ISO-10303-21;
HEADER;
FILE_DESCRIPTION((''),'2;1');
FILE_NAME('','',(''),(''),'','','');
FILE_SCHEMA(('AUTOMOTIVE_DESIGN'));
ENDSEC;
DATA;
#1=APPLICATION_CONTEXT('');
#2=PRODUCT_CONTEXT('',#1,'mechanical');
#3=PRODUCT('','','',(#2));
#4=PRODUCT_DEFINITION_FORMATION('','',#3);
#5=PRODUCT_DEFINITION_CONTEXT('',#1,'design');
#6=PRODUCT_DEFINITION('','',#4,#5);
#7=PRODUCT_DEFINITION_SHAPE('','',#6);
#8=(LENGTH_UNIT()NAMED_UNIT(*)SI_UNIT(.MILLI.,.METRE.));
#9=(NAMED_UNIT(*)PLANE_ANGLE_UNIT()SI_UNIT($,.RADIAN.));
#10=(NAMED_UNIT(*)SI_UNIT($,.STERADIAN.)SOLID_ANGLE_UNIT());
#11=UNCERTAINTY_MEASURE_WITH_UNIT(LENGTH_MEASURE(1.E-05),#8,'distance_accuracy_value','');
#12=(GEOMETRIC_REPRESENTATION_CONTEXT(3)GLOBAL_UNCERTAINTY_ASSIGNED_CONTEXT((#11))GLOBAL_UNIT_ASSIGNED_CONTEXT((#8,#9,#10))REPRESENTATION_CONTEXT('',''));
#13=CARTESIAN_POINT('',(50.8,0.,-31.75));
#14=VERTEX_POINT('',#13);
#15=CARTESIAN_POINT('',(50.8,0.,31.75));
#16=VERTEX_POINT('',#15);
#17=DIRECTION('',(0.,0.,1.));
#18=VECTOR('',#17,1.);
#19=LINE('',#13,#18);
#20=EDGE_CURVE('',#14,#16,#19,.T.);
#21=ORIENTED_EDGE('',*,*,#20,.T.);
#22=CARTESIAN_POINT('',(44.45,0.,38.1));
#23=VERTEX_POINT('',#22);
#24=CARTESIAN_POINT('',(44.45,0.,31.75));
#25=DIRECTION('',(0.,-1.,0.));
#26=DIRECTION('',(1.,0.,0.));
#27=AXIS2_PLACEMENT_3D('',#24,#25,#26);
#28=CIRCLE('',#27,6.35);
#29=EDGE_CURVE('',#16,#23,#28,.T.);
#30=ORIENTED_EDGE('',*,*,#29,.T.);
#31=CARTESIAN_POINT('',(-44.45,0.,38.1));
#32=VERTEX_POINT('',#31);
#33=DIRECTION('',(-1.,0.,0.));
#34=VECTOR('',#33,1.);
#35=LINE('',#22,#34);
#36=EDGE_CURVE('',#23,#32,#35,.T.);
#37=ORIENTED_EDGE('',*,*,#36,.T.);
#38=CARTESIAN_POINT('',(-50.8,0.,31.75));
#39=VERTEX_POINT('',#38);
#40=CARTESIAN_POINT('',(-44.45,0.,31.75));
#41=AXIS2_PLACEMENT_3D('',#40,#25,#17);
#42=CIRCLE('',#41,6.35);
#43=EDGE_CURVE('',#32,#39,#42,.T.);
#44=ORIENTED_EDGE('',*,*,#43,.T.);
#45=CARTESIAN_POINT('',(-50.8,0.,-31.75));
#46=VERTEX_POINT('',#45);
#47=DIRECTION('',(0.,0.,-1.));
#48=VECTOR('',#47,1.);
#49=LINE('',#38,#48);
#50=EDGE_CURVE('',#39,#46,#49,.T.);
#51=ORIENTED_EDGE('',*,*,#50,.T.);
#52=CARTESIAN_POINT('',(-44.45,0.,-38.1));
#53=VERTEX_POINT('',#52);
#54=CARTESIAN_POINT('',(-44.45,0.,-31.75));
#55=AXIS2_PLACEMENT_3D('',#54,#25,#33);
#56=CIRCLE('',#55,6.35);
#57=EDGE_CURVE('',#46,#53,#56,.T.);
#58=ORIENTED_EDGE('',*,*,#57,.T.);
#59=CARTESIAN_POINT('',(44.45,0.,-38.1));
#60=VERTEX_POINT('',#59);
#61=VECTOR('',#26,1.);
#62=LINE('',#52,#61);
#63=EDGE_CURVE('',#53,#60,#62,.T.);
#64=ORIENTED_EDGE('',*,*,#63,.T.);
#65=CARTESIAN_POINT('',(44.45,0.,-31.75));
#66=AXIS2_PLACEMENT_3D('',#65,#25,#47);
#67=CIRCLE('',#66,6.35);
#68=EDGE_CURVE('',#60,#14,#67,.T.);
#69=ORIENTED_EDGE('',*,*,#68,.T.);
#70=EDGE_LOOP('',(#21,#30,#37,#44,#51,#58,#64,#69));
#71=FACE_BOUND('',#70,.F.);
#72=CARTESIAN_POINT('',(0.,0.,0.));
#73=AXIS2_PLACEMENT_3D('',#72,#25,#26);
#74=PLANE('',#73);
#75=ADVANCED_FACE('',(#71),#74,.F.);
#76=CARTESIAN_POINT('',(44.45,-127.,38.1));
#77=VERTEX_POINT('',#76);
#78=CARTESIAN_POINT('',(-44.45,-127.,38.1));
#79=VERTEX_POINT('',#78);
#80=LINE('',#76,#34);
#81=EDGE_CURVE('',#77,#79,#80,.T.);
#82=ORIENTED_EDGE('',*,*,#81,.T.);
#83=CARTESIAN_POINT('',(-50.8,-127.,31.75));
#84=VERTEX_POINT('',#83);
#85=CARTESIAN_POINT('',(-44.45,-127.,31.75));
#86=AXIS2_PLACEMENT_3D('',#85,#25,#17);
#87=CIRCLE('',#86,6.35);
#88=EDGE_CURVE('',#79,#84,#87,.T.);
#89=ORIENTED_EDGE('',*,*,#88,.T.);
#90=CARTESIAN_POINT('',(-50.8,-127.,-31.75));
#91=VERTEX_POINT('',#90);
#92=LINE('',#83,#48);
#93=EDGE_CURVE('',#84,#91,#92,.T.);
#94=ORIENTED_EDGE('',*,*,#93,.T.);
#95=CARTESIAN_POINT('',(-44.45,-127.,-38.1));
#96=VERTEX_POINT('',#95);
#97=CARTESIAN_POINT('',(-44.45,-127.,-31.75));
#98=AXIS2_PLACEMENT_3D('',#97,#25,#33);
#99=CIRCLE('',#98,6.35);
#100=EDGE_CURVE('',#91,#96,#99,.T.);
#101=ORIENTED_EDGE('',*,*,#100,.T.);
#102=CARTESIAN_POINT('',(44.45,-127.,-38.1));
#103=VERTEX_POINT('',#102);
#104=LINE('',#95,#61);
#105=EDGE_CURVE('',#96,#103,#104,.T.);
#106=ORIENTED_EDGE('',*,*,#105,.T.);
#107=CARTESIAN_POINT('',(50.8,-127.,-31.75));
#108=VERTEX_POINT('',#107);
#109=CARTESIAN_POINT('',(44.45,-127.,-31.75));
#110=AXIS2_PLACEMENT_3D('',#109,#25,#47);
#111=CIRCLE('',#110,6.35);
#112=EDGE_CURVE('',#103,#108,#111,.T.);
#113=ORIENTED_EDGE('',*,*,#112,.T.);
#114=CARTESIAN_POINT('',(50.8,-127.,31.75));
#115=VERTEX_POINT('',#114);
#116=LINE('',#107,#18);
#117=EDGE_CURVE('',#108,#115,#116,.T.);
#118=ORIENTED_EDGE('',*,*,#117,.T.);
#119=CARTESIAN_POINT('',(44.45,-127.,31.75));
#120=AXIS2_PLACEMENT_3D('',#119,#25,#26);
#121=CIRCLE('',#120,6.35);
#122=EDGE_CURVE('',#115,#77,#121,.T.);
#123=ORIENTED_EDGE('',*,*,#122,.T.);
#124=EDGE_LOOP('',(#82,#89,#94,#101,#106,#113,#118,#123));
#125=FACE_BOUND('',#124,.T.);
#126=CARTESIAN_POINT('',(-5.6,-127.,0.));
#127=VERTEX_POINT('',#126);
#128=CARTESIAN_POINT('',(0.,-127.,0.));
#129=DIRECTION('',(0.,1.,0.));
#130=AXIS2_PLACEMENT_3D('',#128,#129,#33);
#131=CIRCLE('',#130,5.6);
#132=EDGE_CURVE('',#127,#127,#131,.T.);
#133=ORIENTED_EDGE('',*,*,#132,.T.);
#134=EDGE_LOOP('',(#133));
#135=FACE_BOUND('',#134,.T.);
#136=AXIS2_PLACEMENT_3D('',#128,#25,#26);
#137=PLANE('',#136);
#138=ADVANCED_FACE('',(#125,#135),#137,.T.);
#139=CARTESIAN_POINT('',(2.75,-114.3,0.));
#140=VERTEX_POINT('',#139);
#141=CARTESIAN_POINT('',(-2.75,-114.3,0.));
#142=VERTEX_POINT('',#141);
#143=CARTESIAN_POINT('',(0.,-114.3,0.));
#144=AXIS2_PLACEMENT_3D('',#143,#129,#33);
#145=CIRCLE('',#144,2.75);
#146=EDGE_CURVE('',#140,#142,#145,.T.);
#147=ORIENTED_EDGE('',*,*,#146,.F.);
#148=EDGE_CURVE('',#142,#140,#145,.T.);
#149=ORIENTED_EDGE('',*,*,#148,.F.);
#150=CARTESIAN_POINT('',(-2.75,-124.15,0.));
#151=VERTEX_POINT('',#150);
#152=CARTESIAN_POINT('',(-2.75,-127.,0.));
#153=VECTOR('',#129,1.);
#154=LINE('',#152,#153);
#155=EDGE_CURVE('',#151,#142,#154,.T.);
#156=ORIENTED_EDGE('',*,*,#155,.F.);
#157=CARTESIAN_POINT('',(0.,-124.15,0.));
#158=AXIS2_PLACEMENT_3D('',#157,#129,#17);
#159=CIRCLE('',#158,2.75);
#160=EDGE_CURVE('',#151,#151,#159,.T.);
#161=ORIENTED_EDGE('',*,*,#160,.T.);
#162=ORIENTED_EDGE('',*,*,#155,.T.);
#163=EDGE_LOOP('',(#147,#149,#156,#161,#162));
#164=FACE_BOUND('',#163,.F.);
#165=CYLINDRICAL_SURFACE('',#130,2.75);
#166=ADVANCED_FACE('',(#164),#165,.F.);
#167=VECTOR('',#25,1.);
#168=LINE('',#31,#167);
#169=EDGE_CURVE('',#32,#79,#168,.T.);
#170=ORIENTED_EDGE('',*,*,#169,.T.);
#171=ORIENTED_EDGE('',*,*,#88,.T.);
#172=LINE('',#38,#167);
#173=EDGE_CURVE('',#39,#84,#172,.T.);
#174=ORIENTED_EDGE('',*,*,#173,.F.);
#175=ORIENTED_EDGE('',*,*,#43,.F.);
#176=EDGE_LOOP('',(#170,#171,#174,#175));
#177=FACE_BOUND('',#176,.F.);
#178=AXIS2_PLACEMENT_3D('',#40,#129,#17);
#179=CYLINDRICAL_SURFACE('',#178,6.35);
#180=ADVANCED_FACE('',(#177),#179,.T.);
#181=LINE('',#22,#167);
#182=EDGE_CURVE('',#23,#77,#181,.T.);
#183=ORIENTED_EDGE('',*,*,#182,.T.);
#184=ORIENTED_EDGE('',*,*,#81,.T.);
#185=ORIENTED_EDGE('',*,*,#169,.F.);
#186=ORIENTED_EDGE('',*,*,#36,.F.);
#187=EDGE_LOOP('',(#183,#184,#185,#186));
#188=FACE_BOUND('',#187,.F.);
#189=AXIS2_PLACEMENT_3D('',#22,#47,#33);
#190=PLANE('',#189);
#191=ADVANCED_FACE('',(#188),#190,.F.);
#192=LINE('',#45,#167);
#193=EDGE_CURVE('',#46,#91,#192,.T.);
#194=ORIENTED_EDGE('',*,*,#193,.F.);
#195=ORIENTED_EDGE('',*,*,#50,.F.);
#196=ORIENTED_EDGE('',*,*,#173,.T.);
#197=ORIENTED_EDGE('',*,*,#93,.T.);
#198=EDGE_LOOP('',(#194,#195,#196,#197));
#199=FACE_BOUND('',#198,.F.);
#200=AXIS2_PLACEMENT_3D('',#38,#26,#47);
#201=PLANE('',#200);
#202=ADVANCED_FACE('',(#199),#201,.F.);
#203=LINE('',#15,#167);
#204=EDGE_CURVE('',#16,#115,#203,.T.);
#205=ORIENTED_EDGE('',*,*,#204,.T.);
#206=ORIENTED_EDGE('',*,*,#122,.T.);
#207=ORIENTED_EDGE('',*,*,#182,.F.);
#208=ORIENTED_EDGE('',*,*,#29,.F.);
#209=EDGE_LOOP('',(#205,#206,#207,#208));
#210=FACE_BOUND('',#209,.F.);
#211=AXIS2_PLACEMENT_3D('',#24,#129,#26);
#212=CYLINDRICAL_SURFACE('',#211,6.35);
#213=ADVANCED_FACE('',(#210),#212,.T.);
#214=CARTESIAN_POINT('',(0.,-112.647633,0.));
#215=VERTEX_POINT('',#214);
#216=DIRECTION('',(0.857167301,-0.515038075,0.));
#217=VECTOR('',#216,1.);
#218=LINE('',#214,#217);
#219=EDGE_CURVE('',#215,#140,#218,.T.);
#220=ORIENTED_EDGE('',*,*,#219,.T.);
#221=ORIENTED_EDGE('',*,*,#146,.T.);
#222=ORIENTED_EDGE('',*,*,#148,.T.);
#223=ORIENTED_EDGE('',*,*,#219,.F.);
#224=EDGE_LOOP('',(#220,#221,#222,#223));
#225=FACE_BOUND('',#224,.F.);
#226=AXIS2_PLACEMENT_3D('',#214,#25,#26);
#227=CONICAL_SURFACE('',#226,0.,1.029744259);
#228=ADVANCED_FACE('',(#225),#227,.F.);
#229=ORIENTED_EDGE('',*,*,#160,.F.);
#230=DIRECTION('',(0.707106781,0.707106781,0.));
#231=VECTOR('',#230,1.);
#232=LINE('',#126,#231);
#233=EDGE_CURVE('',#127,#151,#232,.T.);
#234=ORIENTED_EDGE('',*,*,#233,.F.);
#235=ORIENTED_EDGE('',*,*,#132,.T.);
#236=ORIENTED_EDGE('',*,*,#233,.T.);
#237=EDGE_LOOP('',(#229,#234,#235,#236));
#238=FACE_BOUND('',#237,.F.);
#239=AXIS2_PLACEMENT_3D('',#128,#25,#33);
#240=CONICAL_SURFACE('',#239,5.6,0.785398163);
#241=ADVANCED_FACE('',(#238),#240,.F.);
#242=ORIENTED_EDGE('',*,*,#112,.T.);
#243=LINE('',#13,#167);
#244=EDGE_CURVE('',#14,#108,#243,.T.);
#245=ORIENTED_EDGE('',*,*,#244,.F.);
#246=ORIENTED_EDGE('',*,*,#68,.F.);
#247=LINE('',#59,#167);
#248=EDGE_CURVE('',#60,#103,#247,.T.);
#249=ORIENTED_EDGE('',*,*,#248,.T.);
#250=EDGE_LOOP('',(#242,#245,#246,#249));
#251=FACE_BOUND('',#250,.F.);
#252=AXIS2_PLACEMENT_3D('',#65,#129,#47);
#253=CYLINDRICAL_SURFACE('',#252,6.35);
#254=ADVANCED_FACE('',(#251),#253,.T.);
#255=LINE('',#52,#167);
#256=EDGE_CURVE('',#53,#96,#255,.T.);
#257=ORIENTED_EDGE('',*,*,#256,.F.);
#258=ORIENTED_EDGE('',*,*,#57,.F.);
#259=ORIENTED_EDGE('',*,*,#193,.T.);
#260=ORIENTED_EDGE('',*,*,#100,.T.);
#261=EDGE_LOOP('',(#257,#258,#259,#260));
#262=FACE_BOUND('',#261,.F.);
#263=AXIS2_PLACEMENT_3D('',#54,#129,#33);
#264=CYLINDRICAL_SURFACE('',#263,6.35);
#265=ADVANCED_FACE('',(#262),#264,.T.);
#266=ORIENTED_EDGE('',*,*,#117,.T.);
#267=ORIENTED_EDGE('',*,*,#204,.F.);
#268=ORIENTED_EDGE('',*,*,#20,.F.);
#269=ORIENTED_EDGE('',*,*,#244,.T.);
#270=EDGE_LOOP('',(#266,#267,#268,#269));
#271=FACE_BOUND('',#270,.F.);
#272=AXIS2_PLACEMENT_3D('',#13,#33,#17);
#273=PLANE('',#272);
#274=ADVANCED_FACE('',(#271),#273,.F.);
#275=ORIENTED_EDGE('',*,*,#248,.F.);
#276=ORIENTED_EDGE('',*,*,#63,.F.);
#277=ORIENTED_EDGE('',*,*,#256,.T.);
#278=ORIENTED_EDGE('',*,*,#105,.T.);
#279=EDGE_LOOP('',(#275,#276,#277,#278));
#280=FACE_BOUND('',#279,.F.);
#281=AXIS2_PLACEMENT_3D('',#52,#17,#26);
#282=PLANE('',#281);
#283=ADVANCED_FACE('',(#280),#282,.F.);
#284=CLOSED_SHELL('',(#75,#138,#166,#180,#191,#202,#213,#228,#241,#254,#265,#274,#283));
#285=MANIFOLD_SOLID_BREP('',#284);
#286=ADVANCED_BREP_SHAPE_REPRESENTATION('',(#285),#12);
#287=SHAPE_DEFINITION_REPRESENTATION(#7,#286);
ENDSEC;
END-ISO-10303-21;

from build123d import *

# Parameters (mm, degrees)
F1_DEPTH       = 127
F3_D           = 5.5
F3_DEPTH       = 12.7
F3_CSINK_D     = 11.2
F3_CSINK_ANGLE = 90
F3_TIP         = 1.6523667023


with BuildPart() as f1:
    # F0 (on Front) → F1 (new body)
    with BuildSketch(Plane.XZ):
        with BuildLine():
            ThreePointArc((-50.8, -31.75), (-48.9401280605, -36.2401280605), (-44.45, -38.1))
            Line((-44.45, -38.1), (44.45, -38.1))
            ThreePointArc((44.45, -38.1), (48.9401280605, -36.2401280605), (50.8, -31.75))
            Line((50.8, -31.75), (50.8, 31.75))
            ThreePointArc((50.8, 31.75), (48.9401280605, 36.2401280605), (44.45, 38.1))
            Line((44.45, 38.1), (-44.45, 38.1))
            ThreePointArc((-44.45, 38.1), (-48.9401280605, 36.2401280605), (-50.8, 31.75))
            Line((-50.8, 31.75), (-50.8, -31.75))
        make_face()
    extrude(amount=F1_DEPTH)

    # F3
    with Locations(Plane.XZ.offset(127)):
        with Locations((0, 0)):
            CounterSinkHole(F3_D / 2, F3_CSINK_D / 2, depth=F3_DEPTH, counter_sink_angle=F3_CSINK_ANGLE)
            with Locations((0, 0, -(F3_DEPTH + F3_TIP / 2))):  # 118° drill point
                Cone(0, F3_D / 2, F3_TIP, mode=Mode.SUBTRACT)


solid = f1.part
